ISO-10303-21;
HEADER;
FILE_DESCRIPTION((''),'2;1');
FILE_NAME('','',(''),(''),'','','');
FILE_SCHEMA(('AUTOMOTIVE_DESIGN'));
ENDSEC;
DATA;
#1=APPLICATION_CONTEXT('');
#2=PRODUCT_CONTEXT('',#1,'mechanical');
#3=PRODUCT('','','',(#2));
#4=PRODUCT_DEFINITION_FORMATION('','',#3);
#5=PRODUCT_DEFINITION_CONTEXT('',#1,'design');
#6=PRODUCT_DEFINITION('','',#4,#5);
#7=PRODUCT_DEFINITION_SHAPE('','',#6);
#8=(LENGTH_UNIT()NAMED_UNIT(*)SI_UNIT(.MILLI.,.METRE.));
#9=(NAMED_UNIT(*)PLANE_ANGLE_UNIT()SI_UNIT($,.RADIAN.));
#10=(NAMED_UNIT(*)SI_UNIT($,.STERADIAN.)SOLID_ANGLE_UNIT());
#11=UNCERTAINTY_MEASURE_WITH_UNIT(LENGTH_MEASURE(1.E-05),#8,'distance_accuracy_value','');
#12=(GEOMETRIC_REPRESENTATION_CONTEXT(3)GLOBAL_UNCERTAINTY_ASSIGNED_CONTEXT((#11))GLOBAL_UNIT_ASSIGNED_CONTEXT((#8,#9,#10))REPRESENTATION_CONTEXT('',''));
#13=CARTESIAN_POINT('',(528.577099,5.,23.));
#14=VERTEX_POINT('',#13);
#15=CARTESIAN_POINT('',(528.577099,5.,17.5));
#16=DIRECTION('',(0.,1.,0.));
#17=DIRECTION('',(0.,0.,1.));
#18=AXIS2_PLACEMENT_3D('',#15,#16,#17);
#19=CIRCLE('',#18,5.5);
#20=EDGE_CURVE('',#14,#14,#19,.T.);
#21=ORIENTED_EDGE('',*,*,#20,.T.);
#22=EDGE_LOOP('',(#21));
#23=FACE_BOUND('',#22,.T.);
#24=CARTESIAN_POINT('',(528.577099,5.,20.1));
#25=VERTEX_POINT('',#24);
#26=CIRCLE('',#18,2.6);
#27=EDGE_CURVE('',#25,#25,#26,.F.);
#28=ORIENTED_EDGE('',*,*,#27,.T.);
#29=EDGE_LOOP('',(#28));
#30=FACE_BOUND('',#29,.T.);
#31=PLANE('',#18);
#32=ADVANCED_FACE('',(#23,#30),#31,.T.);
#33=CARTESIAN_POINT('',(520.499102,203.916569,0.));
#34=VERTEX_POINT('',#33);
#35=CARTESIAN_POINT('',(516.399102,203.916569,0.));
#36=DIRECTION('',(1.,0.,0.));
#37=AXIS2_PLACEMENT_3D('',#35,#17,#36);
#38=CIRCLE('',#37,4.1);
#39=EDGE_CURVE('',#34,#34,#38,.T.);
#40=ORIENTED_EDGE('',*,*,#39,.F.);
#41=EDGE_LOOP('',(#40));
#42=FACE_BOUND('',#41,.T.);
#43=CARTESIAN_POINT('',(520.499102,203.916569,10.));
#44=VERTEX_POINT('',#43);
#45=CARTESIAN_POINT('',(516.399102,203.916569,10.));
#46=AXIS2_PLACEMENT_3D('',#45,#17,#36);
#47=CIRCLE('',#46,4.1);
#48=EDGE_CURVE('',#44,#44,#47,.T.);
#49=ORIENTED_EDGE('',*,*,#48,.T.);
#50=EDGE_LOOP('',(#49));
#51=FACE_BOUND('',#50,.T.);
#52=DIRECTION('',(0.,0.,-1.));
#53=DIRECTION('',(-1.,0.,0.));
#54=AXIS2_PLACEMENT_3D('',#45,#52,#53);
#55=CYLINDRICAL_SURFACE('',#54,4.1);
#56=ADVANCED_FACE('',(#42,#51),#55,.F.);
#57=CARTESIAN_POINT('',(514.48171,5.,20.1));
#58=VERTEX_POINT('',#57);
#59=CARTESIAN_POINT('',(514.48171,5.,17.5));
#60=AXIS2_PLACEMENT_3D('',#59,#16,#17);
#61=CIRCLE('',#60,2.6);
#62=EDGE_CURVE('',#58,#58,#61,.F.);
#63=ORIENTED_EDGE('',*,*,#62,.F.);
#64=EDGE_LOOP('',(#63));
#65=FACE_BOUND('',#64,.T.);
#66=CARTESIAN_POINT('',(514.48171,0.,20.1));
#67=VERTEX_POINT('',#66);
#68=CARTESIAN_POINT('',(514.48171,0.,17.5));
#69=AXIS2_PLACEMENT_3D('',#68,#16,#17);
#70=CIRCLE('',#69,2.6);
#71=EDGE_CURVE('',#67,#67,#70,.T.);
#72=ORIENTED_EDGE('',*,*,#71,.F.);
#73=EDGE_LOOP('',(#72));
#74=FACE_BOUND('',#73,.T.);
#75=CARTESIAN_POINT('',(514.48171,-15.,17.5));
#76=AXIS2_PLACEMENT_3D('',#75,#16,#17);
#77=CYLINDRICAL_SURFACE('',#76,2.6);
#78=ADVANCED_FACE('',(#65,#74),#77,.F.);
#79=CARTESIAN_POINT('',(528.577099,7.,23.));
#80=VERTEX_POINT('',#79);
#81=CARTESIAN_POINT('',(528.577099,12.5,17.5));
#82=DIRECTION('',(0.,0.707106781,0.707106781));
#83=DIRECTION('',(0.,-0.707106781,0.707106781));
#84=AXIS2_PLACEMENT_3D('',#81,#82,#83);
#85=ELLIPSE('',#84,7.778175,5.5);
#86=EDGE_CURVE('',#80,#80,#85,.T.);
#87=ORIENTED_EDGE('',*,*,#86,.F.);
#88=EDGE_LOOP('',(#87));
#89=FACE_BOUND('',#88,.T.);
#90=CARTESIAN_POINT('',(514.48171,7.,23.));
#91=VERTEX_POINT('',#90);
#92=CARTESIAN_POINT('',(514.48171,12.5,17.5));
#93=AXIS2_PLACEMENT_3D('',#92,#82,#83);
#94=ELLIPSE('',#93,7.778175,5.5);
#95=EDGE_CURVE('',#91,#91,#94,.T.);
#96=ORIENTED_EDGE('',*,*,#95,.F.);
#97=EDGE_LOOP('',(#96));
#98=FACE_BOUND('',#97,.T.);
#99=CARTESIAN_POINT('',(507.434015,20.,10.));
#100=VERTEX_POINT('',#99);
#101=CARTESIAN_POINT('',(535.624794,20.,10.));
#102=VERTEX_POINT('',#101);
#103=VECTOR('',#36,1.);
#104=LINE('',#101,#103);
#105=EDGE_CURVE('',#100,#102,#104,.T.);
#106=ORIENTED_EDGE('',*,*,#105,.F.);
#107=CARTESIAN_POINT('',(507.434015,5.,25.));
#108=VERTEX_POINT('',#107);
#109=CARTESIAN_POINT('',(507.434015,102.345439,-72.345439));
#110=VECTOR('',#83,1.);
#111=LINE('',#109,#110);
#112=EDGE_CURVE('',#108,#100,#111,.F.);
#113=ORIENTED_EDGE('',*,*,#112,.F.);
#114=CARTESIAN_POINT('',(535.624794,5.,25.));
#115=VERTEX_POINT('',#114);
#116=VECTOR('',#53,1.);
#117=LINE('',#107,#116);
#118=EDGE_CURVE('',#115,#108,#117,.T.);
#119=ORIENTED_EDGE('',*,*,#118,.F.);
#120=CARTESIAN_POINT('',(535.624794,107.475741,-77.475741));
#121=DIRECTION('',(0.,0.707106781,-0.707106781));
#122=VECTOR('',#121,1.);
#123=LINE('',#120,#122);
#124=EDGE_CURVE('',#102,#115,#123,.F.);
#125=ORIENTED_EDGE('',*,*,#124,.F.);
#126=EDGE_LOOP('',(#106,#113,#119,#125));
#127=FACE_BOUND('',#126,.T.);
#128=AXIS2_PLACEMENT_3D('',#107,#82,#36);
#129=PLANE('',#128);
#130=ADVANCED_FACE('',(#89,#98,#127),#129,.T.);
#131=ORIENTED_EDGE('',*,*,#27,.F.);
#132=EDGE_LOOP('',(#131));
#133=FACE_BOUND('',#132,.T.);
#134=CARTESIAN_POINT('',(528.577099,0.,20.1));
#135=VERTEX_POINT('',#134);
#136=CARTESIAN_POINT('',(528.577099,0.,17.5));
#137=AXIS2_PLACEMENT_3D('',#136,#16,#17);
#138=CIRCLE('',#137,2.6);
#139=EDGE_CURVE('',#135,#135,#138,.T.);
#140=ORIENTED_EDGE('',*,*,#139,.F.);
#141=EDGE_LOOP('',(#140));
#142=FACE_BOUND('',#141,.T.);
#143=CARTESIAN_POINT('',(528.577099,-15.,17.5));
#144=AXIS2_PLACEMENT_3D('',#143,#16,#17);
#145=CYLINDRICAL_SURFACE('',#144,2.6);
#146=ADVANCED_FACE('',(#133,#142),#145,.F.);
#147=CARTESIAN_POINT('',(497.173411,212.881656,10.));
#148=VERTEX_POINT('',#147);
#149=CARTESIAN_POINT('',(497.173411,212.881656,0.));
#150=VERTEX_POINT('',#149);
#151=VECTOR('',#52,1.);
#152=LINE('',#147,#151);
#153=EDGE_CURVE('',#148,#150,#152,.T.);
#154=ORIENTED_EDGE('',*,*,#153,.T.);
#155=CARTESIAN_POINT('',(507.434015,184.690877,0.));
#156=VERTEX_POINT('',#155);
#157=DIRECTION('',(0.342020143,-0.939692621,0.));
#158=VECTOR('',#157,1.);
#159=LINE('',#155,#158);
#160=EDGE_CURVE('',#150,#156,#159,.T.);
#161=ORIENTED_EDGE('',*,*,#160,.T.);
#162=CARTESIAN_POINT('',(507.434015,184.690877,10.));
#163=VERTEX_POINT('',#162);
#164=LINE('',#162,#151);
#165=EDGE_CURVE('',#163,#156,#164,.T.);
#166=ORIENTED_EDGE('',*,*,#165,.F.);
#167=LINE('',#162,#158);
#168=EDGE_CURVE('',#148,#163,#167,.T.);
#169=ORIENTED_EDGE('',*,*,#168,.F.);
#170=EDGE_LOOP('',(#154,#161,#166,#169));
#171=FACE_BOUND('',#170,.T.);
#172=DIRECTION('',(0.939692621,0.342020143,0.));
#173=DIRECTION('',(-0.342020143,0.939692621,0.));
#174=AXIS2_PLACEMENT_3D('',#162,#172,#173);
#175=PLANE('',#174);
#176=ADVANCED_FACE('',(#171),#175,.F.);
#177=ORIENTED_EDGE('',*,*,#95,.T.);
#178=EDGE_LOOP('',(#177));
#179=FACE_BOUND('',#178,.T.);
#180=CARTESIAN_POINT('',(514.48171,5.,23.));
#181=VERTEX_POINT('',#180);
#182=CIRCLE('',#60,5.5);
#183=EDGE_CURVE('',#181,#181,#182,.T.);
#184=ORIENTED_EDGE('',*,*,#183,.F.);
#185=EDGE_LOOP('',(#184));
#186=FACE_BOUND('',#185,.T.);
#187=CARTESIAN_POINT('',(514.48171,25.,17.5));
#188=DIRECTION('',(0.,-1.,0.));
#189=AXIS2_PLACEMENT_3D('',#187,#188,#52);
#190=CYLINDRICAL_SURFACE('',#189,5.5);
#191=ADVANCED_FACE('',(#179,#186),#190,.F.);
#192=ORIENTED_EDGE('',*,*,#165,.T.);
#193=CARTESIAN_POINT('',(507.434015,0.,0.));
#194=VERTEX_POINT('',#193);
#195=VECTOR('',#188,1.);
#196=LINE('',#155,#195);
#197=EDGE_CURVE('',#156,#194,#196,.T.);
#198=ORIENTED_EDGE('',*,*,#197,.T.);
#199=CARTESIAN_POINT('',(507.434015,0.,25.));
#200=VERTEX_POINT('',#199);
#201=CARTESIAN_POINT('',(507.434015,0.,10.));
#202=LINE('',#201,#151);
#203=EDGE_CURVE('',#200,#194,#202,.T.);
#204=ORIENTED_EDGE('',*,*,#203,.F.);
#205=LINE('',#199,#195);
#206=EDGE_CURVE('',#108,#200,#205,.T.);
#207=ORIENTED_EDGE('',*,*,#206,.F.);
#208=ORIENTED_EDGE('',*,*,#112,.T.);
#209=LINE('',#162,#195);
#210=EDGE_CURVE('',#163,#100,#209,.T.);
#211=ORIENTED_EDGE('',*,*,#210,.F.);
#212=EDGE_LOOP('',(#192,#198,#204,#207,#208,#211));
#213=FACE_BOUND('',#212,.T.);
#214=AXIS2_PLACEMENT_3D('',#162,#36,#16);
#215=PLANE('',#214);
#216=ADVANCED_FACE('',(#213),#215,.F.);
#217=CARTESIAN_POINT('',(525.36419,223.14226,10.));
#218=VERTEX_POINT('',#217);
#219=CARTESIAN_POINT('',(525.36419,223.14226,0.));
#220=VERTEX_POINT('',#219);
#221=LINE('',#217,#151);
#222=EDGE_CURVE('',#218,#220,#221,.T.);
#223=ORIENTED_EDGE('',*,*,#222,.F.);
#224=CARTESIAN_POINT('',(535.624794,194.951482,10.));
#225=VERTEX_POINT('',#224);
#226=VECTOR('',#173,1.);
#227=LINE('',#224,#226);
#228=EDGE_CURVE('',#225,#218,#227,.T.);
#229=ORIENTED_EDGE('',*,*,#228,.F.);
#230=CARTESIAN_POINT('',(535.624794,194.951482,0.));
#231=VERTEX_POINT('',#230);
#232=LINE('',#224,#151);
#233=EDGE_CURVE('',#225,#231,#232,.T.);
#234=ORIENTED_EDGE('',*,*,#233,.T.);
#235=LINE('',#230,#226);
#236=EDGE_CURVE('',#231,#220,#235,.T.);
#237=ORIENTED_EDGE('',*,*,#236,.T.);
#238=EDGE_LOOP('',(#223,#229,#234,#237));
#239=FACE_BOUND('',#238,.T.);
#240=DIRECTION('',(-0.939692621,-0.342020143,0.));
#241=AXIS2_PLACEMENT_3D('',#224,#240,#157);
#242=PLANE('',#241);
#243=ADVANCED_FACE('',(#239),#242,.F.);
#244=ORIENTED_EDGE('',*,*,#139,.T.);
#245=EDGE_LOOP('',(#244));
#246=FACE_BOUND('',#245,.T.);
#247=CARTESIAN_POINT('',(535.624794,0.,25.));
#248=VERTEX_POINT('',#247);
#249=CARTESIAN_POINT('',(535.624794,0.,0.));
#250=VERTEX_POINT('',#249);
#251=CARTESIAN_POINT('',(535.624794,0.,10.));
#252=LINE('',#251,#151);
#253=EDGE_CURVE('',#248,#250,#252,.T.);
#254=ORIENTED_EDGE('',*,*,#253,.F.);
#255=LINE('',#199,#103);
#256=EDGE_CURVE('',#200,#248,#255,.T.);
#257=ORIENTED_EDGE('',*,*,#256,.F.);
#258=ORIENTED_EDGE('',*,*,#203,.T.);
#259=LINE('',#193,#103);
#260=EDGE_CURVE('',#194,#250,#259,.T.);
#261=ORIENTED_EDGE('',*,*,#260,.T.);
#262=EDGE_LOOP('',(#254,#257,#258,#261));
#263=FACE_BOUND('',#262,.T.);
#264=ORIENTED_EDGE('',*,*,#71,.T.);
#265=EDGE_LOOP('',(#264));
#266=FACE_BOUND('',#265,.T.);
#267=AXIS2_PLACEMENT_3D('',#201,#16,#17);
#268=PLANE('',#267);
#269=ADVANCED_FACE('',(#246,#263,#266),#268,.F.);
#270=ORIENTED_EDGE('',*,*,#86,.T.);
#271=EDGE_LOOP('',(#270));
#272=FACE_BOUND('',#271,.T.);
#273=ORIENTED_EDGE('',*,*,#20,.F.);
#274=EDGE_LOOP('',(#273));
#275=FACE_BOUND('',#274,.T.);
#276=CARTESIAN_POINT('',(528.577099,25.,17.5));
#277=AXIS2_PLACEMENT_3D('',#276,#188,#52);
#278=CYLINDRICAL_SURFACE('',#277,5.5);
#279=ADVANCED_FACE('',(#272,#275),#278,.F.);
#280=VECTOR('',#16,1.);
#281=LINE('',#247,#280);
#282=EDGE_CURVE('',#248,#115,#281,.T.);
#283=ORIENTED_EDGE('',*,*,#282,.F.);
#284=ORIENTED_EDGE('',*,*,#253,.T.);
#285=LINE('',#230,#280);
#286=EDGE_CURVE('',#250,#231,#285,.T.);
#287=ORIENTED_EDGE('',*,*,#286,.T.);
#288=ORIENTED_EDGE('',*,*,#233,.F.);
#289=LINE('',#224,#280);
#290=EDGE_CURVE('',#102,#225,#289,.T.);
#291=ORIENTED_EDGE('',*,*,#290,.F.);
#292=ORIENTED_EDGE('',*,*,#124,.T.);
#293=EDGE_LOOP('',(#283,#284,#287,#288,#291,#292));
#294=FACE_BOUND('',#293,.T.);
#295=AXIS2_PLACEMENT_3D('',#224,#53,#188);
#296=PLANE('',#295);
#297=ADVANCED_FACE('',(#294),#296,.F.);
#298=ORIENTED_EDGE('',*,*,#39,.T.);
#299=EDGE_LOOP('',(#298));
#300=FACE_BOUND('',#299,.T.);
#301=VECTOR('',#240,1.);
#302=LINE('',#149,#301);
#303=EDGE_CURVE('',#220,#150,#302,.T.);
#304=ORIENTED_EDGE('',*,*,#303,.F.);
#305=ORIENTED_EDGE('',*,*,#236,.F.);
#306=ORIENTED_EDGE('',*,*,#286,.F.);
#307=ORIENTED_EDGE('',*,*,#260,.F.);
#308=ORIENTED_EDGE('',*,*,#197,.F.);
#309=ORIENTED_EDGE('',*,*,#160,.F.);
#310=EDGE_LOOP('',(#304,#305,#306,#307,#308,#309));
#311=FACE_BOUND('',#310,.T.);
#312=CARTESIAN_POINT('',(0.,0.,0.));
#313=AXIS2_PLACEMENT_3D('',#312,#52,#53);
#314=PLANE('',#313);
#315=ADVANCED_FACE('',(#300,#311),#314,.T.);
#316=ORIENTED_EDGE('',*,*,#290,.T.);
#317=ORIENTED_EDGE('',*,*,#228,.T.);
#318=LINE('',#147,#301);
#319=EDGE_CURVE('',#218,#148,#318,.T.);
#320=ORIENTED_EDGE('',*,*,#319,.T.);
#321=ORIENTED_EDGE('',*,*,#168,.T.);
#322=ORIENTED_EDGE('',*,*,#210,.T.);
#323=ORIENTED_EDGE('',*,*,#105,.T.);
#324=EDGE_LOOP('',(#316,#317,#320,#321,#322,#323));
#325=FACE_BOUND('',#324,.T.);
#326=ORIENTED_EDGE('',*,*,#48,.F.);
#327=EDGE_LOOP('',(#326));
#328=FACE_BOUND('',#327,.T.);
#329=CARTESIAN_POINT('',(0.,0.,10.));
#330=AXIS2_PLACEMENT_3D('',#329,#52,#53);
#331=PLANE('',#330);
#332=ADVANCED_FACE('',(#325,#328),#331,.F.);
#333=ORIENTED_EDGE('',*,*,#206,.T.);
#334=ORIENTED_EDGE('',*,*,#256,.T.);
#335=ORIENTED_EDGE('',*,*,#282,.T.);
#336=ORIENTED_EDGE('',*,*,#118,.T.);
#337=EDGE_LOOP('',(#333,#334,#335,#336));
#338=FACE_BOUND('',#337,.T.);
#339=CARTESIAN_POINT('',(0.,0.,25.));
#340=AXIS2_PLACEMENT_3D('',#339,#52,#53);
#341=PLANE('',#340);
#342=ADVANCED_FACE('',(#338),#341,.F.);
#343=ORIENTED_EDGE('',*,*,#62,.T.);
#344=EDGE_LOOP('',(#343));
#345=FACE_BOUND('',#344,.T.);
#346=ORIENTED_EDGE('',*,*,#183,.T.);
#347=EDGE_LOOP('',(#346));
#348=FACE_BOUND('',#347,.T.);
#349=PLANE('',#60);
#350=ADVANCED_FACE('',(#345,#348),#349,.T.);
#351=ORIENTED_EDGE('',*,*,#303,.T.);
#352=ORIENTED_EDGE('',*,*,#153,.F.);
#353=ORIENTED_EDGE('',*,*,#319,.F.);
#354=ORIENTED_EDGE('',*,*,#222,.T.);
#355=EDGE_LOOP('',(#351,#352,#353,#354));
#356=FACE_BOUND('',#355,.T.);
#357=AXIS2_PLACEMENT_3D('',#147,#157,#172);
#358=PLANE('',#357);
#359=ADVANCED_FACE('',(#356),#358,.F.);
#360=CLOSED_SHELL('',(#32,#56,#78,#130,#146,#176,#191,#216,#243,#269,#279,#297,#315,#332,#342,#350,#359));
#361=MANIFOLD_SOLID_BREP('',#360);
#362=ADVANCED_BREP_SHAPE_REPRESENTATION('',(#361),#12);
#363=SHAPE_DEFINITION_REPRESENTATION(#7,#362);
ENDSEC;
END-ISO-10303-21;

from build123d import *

# Parameters (mm, degrees)
SKETCH1_R           = 4.1
BOSS_EXTRUDE1_DEPTH = 10
SKETCH2_W           = 28.190778624
SKETCH2_H           = 5
BOSS_EXTRUDE2_DEPTH = 15
SKETCH4_R           = 2.6
CUT_EXTRUDE1_DEPTH  = 20
CHAMFER1_SIZE       = 15
SKETCH5_R           = 5.5
CUT_EXTRUDE2_DEPTH  = 20


with BuildPart() as part:
    # Sketch1 → Boss-Extrude1 (new body)
    with BuildSketch(Plane.XY):
        Polygon((535.624793848, 194.951481696), (535.624793848, 0), (507.434015224, 0), (507.434015224, 184.690877396), (497.173410925, 212.881656019), (525.364189548, 223.142260319), align=None)
        with Locations((516.399102386, 203.916568858)):
            Circle(SKETCH1_R, mode=Mode.SUBTRACT)
    extrude(amount=BOSS_EXTRUDE1_DEPTH)

    # Sketch2 → Boss-Extrude2 (add)
    with BuildSketch(Plane.XY.offset(10)):
        with Locations((521.529404536, 2.5)):
            Rectangle(SKETCH2_W, SKETCH2_H)
    extrude(amount=BOSS_EXTRUDE2_DEPTH)

    # Sketch4 → Cut-Extrude1 (cut)
    with BuildSketch(Plane(origin=(0, 5, 0), x_dir=(1, 0, 0), z_dir=(0, 1, 0))):
        with Locations(Location((528.577099192, -17.5, 0), (0, 0, 270))):
            Circle(SKETCH4_R)
        with Locations(Location((514.48170988, -17.5, 0), (0, 0, 270))):
            Circle(SKETCH4_R)
    extrude(amount=-CUT_EXTRUDE1_DEPTH, mode=Mode.SUBTRACT)

    # Chamfer1
    # the kernel refuses this chamfer: 15 mm, written as the material it adds along each edge
    with BuildSketch(Plane(origin=(535.624793848, 5, 10), x_dir=(0, 0.9996219169112968, -0.02749587661058632), z_dir=(-1, 0, 0))) as chamfer1_piece_1_section:
        Polygon((CHAMFER1_SIZE * 0.999621916911, -CHAMFER1_SIZE * 0.0274958766106), (-CHAMFER1_SIZE * 0.0274958766106, -CHAMFER1_SIZE * 0.999621916911), (0, 0), align=None)
    chamfer1_piece_1 = extrude(amount=28.190778624, mode=Mode.PRIVATE)
    chamfer1_piece_1 = split(chamfer1_piece_1, bisect_by=Plane(origin=(521.529400048, 10.087187588, 25), z_dir=(0, 0, -1)), keep=Keep.TOP, mode=Mode.PRIVATE)
    chamfer1_piece_1 = chamfer1_piece_1 - Plane(origin=(528.577099192, 10.087187588, 17.5), x_dir=(0, 0, 1), z_dir=(0, 1, 0)) * Cylinder(2.6, 117, mode=Mode.PRIVATE)
    chamfer1_piece_1 = chamfer1_piece_1 - Plane(origin=(514.48170988, 10.087187588, 17.5), x_dir=(0, 0, 1), z_dir=(0, 1, 0)) * Cylinder(2.6, 117, mode=Mode.PRIVATE)
    add(chamfer1_piece_1)

    # Sketch5 → Cut-Extrude2 (cut)
    with BuildSketch(Plane(origin=(0, 5, 0), x_dir=(1, 0, 0), z_dir=(0, 1, 0))):
        with Locations(Location((514.48170988, -17.5, 0), (0, 0, 270))):
            Circle(SKETCH5_R)
        with Locations(Location((528.577099192, -17.5, 0), (0, 0, 270))):
            Circle(SKETCH5_R)
    extrude(amount=CUT_EXTRUDE2_DEPTH, mode=Mode.SUBTRACT)


solid = part.part
